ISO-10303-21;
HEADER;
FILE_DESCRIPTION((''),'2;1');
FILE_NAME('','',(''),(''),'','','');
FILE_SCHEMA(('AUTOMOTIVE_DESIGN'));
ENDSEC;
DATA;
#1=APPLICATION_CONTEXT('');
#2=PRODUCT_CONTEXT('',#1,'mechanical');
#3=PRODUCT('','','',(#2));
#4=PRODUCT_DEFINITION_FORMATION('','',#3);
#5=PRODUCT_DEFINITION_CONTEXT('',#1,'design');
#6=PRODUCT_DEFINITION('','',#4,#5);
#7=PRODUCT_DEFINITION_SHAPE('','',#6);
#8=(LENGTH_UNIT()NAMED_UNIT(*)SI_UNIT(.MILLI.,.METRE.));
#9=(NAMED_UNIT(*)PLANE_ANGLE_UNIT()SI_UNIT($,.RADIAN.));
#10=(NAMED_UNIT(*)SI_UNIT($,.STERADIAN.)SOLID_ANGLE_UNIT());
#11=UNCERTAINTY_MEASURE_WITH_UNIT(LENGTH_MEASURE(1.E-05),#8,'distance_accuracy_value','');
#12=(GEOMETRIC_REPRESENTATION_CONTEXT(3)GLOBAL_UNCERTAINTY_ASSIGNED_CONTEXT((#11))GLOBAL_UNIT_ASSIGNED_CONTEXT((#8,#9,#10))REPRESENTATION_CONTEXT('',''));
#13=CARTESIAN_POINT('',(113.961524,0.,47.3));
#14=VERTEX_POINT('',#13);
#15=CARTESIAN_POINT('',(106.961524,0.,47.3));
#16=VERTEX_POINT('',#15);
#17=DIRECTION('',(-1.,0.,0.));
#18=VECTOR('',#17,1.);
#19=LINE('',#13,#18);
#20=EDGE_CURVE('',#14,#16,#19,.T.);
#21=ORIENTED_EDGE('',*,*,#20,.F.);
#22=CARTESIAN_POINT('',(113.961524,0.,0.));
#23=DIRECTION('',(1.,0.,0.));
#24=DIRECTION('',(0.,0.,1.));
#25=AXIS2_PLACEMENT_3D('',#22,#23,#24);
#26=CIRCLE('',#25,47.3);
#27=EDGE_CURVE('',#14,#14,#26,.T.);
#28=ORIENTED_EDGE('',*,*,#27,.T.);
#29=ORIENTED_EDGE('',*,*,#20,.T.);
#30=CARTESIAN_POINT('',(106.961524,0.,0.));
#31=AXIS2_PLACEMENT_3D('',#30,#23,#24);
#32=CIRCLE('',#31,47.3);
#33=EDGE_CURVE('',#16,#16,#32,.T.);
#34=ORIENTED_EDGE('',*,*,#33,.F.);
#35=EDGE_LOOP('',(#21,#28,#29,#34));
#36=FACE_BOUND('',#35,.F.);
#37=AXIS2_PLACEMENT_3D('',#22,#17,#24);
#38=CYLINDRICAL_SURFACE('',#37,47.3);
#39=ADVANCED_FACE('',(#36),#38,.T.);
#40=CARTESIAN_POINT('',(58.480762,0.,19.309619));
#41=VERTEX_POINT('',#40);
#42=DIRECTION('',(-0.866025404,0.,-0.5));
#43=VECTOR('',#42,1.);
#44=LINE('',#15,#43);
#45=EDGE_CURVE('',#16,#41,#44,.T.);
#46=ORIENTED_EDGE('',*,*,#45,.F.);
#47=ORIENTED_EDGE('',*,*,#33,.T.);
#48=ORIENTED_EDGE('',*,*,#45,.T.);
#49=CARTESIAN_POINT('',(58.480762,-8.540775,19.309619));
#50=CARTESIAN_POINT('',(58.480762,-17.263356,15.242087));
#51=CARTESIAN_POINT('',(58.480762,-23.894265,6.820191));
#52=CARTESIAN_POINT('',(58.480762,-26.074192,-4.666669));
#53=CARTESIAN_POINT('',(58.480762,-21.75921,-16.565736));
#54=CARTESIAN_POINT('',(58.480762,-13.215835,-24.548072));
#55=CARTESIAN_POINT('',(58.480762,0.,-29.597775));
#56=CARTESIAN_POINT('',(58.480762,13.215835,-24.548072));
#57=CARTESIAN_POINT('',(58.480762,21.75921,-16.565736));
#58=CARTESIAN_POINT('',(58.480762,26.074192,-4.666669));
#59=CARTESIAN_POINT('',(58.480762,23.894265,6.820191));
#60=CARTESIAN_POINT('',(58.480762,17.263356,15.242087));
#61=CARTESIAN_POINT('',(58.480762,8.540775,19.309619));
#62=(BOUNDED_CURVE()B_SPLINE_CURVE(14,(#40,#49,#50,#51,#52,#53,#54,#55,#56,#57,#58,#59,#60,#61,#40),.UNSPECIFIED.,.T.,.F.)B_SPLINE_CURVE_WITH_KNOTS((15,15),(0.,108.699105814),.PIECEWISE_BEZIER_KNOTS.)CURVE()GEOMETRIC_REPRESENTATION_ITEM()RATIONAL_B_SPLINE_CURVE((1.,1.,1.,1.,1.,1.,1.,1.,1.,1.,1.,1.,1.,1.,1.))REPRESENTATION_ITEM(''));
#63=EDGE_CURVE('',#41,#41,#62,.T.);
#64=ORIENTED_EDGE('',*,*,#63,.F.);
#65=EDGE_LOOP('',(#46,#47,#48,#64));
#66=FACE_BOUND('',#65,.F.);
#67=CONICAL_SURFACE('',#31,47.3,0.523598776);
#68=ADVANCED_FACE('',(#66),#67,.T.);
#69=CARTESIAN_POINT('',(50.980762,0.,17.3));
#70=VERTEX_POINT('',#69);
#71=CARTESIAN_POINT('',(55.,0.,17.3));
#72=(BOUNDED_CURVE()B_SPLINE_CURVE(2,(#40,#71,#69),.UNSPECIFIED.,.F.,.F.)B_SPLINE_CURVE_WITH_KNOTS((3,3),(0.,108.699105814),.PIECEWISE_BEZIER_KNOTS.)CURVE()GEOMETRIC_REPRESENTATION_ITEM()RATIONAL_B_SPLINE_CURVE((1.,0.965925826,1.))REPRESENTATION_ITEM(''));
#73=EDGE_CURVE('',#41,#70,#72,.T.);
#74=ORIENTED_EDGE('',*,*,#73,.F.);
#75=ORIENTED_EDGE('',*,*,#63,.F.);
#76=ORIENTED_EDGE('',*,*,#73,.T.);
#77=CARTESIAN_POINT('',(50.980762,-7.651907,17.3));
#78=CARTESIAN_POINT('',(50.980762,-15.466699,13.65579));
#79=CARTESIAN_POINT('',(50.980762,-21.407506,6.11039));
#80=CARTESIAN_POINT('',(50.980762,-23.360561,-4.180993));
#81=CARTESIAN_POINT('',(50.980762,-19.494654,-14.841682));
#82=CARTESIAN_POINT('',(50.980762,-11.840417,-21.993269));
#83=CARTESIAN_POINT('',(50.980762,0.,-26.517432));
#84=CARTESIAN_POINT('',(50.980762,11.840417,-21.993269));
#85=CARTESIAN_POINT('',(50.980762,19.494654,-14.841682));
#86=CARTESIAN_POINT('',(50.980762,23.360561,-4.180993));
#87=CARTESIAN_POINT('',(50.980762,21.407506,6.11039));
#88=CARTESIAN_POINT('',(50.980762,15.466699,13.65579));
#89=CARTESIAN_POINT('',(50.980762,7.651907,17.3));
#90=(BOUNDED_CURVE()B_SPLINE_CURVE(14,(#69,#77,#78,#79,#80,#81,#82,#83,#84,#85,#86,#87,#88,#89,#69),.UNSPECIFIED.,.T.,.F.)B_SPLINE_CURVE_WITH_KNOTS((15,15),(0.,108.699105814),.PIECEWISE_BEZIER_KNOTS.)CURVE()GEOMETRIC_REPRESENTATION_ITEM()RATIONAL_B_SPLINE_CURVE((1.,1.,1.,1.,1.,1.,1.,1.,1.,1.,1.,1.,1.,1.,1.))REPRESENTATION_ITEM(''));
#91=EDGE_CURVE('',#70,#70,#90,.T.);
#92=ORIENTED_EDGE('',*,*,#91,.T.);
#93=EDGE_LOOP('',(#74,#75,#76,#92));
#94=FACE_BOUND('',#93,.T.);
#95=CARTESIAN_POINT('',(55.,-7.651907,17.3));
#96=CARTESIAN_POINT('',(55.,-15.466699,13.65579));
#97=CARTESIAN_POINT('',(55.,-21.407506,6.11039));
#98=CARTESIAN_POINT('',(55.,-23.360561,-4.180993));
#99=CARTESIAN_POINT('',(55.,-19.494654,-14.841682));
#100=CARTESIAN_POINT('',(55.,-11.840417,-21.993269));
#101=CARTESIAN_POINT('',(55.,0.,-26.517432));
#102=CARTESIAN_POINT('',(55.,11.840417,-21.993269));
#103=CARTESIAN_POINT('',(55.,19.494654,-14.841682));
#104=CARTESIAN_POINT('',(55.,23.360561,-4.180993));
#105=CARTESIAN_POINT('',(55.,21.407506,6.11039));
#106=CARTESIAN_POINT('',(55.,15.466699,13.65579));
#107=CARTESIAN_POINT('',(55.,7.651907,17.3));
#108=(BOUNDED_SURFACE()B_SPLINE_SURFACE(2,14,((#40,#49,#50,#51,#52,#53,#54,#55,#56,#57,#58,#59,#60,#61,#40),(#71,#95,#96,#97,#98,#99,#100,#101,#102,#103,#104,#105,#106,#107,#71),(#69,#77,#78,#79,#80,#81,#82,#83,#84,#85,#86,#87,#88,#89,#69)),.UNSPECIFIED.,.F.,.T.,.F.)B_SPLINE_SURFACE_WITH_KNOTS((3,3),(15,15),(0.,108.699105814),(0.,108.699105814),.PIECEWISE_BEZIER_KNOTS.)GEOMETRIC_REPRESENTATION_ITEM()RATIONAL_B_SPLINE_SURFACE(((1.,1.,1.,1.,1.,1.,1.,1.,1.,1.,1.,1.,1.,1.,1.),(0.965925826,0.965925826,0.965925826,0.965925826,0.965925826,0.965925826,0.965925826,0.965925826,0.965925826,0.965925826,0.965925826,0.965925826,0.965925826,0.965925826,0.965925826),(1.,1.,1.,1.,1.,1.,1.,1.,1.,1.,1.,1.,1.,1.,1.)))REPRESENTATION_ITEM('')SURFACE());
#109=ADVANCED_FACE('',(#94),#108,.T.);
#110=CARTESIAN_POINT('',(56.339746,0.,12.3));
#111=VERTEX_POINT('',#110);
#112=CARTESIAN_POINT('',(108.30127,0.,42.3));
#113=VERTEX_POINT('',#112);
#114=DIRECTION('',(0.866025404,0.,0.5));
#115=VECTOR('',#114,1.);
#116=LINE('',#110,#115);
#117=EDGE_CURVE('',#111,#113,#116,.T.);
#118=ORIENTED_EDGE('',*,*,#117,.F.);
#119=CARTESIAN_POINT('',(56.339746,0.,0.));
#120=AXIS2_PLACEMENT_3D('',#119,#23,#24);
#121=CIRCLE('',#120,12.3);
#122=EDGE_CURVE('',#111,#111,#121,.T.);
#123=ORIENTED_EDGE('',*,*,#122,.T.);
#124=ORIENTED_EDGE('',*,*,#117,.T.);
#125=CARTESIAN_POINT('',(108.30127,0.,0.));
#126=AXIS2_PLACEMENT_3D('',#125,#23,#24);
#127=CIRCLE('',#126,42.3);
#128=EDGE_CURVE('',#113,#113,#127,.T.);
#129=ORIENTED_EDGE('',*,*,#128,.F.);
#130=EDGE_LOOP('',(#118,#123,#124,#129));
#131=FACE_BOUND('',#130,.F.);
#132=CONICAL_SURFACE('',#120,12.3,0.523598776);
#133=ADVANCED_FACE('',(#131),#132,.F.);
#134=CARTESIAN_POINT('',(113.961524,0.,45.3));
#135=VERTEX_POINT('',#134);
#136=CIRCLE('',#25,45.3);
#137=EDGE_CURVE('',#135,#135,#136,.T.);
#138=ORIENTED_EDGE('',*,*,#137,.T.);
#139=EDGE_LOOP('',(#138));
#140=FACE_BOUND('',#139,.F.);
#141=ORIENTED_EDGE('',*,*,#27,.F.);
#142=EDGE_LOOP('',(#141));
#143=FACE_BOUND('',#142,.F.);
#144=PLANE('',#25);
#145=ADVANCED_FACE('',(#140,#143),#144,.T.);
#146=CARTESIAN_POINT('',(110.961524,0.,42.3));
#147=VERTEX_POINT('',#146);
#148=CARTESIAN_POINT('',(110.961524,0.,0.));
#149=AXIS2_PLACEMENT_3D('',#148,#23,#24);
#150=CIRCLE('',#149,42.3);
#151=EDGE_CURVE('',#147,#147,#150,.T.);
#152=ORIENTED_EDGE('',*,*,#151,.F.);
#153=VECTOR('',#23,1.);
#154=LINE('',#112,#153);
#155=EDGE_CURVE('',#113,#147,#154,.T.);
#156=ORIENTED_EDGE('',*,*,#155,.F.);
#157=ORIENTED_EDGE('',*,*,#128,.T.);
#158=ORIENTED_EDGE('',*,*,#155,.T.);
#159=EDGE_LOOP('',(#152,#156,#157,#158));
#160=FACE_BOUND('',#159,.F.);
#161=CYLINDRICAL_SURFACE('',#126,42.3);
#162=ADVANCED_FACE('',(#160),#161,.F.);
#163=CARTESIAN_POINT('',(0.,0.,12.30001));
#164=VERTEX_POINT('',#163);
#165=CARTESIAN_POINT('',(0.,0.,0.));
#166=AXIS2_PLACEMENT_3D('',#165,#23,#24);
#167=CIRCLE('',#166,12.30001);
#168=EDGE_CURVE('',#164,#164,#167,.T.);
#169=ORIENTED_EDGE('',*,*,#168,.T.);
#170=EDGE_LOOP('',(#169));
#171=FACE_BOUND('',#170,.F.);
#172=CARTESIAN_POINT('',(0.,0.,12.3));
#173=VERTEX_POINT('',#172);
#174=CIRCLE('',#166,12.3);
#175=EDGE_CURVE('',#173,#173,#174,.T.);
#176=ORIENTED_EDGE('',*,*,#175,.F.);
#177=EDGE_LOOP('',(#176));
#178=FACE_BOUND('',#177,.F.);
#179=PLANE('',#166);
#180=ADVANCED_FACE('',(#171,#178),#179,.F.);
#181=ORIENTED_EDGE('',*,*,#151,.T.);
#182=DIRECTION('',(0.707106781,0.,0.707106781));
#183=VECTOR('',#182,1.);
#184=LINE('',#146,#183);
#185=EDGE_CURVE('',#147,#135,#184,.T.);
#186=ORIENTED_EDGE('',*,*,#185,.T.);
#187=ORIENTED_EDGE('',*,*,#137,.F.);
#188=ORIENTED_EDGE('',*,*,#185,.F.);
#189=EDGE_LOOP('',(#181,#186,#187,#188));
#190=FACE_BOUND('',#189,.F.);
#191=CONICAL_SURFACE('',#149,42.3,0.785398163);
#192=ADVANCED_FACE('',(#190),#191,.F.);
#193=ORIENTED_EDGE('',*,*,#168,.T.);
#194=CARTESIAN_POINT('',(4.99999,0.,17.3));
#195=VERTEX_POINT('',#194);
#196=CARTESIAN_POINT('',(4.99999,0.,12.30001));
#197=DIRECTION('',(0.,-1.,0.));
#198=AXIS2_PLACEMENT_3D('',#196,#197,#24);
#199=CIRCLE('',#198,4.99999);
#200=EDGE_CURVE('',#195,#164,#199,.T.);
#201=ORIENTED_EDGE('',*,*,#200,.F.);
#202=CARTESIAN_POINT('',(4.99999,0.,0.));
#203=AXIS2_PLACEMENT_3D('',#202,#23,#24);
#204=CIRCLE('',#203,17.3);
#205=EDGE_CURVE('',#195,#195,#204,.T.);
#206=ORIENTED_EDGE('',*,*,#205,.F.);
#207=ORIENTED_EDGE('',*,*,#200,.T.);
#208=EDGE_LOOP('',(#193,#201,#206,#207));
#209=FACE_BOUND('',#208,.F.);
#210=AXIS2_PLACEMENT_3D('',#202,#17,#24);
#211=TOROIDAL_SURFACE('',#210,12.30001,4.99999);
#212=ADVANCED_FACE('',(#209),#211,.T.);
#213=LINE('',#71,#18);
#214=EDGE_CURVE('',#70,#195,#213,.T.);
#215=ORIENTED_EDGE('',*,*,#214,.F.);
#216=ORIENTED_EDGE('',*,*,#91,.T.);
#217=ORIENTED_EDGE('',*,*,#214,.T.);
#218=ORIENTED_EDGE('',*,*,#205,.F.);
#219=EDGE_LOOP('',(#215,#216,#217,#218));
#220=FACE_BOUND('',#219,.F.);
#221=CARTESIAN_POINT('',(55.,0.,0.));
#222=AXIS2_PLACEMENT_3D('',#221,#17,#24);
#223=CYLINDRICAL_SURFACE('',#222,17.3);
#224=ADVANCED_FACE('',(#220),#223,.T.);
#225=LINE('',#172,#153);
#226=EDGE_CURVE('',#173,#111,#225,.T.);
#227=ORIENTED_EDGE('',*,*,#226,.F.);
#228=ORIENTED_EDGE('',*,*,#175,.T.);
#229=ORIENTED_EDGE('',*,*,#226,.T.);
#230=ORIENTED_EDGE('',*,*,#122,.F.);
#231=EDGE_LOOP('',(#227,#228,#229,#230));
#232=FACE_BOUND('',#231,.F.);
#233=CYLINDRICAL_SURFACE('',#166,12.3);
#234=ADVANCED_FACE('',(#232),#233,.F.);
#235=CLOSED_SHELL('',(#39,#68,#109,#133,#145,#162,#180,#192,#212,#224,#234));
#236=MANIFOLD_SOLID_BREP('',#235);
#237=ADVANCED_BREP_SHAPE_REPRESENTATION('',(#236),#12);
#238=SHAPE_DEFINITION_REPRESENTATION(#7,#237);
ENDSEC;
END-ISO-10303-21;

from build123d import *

# Parameters (mm, degrees)
F2_SIZE = 3
F3_R    = 15
F4_R    = 4.99999


# Not quite as in the source:
# - a fillet or chamfer is up to 0.001 mm smaller than in the source, because OpenCascade refuses the exact size


with BuildPart() as f1:
    # F0 (on Front) → F1 (revolve)
    with BuildSketch(Plane.XZ):
        Polygon((55, 17.3), (0, 17.3), (0, 12.3), (56.3397459622, 12.3), (108.3012701892, 42.3), (113.9615242271, 42.3), (113.9615242271, 47.3), (106.9615242271, 47.3), align=None)
    revolve(axis=Axis((19.2044641059, 0, 0), (1, 0, 0)))

    # F2
    f2_edges = [f1.edges().sort_by_distance(p)[0] for p in [
        (113.961524, 0, -42.3),
    ]]
    chamfer(f2_edges, length=F2_SIZE)

    # F3
    f3_edges = [f1.edges().sort_by_distance(p)[0] for p in [
        (55, 0, -17.3),
    ]]
    fillet(f3_edges, radius=F3_R)

    # F4 (radius 5 in the source; OpenCascade refuses exactly that, so slightly less here)
    f4_edges = [f1.edges().sort_by_distance(p)[0] for p in [
        (0, 0, -17.3),
    ]]
    fillet(f4_edges, radius=F4_R)


solid = f1.part
